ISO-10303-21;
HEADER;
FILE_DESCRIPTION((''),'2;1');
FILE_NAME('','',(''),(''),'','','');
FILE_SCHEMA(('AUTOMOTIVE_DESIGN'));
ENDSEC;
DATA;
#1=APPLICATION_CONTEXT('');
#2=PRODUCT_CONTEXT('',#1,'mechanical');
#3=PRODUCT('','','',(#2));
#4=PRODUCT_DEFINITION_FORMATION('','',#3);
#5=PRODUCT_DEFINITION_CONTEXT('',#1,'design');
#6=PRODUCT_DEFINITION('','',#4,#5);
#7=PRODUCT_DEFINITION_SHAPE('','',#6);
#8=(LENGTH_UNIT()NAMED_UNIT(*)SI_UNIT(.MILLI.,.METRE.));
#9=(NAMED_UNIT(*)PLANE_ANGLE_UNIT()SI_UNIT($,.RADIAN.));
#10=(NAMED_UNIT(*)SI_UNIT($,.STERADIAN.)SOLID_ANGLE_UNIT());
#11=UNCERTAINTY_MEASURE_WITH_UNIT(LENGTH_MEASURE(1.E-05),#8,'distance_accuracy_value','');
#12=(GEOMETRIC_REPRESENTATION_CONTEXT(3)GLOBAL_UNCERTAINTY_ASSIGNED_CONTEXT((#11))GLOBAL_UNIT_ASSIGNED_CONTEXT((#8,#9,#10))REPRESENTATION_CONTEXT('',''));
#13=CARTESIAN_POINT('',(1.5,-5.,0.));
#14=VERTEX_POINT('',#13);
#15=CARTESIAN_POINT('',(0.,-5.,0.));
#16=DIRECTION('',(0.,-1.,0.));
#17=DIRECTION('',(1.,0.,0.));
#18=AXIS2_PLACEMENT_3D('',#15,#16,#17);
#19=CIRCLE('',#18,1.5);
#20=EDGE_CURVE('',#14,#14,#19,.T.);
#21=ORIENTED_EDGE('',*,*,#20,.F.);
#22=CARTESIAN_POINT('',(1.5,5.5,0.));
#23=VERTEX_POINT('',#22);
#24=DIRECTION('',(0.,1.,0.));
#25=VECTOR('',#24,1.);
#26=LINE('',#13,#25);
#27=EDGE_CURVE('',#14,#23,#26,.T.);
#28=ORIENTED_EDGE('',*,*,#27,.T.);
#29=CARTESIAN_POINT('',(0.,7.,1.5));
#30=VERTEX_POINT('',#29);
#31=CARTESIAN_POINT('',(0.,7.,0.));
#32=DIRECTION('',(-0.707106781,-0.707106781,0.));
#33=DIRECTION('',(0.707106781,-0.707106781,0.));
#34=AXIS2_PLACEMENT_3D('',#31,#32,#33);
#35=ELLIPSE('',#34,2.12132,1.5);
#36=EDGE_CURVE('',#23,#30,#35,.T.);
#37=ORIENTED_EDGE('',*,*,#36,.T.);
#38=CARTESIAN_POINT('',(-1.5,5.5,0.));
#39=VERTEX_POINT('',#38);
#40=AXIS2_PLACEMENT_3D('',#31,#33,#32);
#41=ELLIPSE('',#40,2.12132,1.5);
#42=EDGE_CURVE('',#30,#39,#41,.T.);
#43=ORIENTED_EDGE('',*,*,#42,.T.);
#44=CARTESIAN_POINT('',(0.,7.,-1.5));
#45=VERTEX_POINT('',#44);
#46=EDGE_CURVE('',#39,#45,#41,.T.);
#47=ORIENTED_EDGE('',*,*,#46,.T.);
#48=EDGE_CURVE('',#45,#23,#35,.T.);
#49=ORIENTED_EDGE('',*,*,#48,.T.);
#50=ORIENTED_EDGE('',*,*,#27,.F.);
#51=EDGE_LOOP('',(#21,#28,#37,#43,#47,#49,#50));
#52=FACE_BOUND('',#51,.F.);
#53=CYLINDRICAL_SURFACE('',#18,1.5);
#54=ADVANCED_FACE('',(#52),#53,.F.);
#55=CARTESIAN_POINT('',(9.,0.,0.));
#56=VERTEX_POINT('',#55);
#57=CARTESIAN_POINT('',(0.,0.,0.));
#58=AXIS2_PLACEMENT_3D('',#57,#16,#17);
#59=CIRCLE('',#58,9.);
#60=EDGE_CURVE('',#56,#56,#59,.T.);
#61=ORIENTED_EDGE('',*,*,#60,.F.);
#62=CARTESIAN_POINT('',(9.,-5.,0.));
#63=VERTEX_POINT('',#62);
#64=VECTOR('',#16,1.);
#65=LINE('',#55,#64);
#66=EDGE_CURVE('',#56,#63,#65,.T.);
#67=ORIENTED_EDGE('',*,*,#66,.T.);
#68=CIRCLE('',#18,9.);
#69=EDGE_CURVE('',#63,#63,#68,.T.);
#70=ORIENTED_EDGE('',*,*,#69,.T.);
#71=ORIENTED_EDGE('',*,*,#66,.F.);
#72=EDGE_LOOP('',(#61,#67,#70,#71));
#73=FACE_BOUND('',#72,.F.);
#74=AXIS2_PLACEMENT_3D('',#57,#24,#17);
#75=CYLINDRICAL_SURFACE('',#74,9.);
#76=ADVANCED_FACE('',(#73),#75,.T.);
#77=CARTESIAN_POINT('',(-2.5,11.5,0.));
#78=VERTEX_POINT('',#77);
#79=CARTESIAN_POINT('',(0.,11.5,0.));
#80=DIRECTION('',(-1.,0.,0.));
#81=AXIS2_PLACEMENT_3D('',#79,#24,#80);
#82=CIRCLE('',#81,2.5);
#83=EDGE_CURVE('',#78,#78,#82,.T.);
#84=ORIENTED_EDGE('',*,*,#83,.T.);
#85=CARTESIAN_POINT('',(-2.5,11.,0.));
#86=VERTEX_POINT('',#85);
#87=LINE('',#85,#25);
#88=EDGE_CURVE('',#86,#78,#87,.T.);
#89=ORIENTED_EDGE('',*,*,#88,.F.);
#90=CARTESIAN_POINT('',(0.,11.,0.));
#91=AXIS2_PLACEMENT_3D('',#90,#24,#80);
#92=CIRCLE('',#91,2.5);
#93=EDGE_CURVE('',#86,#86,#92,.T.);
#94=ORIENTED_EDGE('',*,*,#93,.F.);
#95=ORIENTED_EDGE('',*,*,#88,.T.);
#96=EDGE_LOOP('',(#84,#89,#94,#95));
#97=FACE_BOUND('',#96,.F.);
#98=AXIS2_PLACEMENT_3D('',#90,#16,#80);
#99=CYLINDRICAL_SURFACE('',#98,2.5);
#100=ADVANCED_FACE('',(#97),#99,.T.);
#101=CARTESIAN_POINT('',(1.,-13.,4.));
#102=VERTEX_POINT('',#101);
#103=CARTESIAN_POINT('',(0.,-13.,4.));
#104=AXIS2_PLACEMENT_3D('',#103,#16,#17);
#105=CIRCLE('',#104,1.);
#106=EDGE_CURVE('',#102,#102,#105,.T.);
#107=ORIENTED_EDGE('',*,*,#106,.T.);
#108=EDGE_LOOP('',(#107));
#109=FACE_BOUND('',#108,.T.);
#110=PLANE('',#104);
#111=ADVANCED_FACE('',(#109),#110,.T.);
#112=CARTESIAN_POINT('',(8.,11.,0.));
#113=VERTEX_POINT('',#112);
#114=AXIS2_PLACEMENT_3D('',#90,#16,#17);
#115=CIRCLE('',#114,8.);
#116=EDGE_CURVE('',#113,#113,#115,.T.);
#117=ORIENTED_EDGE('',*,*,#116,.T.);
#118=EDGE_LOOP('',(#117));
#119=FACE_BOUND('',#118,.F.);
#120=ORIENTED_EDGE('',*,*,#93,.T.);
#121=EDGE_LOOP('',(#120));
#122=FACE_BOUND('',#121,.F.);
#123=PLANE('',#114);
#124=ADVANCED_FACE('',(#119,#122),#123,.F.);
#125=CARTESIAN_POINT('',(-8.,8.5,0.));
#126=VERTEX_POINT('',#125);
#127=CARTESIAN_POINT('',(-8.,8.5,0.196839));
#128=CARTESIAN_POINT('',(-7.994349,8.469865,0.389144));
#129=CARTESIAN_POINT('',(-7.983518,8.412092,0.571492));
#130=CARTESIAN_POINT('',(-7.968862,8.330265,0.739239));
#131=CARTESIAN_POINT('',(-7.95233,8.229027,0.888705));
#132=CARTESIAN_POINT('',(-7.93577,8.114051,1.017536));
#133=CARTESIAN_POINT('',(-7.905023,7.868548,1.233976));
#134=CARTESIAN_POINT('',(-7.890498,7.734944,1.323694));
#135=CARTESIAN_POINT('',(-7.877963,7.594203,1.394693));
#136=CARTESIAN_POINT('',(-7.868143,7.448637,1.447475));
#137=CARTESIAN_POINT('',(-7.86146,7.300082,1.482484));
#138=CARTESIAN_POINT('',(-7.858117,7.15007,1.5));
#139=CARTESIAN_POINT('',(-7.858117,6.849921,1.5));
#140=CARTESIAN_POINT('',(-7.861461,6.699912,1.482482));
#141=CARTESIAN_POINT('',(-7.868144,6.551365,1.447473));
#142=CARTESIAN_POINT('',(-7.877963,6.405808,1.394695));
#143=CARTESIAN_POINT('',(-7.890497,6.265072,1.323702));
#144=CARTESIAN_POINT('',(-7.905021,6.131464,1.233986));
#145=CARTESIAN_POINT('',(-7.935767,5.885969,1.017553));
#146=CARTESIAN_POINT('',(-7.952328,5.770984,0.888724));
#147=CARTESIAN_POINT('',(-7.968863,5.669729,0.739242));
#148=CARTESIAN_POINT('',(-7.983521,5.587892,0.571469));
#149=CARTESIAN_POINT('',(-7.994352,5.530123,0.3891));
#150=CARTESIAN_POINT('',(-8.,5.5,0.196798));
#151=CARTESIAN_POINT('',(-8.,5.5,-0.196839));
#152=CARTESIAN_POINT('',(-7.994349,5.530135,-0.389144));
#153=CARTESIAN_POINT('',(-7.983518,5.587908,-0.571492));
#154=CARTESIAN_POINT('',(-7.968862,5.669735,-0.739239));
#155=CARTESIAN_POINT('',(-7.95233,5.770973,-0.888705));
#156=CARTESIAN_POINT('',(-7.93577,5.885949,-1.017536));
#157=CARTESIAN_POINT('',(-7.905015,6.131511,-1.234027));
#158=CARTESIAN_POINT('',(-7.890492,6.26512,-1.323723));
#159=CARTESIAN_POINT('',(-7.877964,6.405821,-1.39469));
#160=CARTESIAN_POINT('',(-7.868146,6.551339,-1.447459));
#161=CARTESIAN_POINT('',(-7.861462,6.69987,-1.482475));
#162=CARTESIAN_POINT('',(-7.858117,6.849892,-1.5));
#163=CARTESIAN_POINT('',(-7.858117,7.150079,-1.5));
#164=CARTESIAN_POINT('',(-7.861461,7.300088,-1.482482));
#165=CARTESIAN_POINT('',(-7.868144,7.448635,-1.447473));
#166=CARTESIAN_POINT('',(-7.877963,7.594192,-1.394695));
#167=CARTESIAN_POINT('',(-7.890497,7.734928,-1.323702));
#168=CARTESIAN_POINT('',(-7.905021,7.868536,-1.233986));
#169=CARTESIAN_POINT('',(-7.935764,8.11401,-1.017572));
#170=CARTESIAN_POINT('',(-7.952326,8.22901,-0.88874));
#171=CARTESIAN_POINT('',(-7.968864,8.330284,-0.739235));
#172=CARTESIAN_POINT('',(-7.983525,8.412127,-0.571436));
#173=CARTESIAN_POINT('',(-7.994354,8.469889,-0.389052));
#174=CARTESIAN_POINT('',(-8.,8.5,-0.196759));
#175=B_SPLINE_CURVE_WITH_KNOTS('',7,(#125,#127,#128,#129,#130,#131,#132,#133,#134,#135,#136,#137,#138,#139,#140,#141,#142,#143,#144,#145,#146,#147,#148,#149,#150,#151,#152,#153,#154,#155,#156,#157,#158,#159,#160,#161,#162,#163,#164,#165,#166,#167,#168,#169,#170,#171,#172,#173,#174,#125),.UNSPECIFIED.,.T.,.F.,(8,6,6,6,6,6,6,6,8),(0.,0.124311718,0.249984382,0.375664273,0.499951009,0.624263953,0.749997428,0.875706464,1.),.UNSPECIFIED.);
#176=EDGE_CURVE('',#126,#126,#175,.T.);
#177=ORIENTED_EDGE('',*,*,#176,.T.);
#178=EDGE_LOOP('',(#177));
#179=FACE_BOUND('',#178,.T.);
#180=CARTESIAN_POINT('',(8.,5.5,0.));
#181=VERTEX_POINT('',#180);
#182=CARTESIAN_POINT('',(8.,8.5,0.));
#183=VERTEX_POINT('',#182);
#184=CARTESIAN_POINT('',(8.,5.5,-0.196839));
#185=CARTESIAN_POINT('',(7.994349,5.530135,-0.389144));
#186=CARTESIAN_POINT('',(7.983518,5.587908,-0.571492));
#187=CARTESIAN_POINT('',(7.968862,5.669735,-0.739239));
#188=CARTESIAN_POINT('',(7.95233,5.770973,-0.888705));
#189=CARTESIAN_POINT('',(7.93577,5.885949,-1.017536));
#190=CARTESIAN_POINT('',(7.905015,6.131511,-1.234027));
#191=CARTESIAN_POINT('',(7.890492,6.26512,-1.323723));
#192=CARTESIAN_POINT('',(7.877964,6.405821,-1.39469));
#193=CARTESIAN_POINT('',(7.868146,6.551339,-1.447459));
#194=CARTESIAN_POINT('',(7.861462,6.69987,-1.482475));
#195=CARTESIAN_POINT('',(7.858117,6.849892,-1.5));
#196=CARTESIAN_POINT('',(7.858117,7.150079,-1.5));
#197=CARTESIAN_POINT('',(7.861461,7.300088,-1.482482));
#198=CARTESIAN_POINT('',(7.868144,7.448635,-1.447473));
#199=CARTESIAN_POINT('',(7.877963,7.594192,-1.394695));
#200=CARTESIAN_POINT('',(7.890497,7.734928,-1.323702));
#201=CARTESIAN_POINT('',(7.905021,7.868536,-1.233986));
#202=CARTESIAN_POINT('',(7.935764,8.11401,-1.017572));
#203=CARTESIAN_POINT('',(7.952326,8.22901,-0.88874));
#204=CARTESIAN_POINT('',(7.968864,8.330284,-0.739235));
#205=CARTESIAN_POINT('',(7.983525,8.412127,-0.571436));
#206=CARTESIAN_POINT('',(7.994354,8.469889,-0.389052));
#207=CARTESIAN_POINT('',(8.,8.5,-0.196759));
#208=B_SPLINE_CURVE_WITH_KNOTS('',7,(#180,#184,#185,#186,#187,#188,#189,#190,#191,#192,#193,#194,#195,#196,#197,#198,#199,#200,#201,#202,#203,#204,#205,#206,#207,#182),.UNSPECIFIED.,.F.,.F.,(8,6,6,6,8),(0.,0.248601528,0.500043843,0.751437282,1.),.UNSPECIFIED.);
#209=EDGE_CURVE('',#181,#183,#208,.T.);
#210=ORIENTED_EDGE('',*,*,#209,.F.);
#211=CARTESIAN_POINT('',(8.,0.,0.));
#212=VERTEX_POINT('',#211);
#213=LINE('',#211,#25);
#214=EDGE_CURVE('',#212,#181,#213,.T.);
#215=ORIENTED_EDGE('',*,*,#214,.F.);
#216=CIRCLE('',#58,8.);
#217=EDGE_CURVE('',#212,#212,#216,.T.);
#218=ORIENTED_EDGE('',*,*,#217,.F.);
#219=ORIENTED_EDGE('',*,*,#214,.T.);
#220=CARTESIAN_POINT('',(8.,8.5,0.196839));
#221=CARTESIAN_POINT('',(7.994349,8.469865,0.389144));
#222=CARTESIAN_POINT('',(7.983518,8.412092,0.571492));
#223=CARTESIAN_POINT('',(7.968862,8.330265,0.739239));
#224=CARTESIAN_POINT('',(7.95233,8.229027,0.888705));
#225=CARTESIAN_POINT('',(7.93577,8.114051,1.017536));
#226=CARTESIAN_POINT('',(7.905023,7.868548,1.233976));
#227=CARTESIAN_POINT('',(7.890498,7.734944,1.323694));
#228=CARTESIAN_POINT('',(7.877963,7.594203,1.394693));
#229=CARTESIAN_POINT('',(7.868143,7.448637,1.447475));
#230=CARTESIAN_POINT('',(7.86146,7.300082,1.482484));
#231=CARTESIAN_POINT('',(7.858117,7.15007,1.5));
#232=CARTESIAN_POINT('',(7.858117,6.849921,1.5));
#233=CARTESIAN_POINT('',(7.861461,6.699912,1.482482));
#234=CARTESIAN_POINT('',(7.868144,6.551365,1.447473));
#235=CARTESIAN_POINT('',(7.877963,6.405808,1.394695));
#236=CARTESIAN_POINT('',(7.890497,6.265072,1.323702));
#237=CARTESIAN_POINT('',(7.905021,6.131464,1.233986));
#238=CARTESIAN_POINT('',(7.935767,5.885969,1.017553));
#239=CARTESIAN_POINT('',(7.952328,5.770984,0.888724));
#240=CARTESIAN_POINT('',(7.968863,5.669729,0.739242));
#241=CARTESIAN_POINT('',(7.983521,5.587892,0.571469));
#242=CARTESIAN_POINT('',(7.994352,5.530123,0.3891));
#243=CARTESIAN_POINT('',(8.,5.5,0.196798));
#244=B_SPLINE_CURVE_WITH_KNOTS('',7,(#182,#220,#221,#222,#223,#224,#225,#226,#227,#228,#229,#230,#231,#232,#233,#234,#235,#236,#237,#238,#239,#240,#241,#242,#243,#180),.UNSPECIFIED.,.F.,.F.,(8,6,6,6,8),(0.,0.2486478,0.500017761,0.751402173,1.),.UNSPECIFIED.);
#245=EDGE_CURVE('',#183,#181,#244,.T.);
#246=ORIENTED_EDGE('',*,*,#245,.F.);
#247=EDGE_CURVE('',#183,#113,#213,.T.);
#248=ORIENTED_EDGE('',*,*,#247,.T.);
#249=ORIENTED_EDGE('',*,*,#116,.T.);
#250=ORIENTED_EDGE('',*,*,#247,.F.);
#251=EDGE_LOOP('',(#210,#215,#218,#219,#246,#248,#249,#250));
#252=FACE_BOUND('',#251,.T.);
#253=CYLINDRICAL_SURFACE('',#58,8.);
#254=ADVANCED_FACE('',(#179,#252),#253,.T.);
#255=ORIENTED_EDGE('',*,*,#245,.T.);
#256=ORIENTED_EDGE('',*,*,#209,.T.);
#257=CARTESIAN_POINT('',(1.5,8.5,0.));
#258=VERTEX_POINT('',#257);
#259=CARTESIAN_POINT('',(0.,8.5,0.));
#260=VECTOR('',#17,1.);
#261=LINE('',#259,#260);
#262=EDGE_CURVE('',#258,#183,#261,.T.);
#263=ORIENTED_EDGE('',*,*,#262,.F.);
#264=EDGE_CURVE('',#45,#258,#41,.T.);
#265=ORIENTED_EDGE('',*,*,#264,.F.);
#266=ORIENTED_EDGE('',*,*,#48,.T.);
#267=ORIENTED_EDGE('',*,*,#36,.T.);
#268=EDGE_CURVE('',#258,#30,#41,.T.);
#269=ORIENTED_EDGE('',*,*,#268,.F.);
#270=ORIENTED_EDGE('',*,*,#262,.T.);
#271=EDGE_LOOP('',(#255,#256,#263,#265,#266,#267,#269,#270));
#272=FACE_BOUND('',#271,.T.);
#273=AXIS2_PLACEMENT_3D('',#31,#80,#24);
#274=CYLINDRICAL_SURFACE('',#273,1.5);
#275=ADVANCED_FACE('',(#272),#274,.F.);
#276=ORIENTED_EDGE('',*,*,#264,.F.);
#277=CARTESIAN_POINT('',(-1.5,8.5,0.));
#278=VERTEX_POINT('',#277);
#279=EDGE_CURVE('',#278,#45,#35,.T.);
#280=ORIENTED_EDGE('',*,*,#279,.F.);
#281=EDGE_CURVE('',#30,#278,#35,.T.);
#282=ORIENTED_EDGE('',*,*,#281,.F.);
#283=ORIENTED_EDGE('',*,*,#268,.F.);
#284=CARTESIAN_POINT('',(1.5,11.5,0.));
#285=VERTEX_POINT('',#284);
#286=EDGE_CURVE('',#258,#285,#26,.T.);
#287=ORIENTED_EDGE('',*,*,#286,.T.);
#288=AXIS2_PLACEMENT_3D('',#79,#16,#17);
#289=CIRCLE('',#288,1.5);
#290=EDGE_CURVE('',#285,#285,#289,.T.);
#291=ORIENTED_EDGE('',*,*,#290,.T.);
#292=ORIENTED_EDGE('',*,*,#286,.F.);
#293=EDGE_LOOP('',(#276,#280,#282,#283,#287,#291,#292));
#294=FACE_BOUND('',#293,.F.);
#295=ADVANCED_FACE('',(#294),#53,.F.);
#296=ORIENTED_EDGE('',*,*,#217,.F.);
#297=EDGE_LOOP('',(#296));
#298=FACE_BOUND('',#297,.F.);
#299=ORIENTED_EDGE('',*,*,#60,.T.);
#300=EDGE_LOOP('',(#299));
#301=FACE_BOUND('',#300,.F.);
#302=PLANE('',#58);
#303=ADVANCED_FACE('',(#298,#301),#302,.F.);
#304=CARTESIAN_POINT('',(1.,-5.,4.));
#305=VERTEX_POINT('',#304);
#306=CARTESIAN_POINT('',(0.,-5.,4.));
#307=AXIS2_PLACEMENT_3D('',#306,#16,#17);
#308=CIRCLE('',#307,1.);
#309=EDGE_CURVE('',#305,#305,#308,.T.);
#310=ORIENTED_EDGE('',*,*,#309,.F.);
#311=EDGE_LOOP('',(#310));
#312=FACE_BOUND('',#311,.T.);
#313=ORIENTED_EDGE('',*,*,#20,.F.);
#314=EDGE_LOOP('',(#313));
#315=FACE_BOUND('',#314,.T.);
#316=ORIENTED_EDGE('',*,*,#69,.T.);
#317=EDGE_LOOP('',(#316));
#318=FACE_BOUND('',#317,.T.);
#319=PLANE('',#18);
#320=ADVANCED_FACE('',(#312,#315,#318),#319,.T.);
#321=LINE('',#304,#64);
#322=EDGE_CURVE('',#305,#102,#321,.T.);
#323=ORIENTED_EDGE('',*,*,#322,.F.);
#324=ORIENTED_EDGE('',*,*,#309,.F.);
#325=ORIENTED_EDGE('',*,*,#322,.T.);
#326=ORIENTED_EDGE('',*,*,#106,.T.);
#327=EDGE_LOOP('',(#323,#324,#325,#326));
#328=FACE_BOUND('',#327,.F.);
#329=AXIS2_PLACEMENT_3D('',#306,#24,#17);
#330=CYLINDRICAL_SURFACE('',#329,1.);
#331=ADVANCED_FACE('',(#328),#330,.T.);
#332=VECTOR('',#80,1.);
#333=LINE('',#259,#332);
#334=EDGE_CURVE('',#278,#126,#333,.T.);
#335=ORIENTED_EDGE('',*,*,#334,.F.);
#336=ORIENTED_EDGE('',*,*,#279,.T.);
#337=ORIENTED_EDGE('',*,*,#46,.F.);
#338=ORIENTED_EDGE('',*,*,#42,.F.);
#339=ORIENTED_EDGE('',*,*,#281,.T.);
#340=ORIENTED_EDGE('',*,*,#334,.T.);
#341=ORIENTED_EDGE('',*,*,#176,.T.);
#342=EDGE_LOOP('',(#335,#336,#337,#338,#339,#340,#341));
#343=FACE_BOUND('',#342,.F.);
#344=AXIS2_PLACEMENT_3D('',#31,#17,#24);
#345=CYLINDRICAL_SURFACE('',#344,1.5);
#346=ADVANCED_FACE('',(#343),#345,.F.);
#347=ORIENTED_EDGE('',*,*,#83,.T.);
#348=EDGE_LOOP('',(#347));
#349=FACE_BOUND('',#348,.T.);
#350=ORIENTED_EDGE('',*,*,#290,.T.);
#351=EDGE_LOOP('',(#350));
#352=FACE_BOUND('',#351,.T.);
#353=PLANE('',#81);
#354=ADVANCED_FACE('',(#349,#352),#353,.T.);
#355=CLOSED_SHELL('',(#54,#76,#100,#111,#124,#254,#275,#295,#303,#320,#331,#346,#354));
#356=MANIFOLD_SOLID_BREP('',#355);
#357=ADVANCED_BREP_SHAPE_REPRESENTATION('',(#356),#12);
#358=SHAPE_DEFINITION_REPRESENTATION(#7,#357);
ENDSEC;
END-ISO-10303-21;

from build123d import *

# Parameters (mm, degrees)
F0_R          = 9
F0_R_2        = 8
F1_DEPTH      = 5
F2_DEPTH      = 11
F3_R          = 2.5
F4_DEPTH      = 0.5
F5_R          = 1.5
F6_DEPTH      = 25
F5_R_2        = 1
F7_DEPTH      = 8
F8_R          = 1.5
F9_DEPTH      = 9.001
F9_DEPTH_BACK = 9.001


with BuildPart() as f1:
    # F0 (on Front) → F1 (new body)
    with BuildSketch(Plane.XZ):
        Circle(F0_R)
        Circle(F0_R_2, mode=Mode.SUBTRACT)
        Circle(F0_R_2)
    extrude(amount=F1_DEPTH)

    # F0 (on Front) → F2 (join)
    with BuildSketch(Plane.XZ):
        Circle(F0_R_2)
    extrude(amount=-F2_DEPTH)

    # F3 (on face) → F4 (join)
    with BuildSketch(Plane(origin=(0, 11, 0), x_dir=(-1, 0, 0), z_dir=(0, 1, 0))):
        Circle(F3_R)
    extrude(amount=F4_DEPTH)

    # F5 (on face) → F6 (cut)
    with BuildSketch(Plane.XZ.offset(5)):
        Circle(F5_R)
    extrude(amount=-F6_DEPTH, mode=Mode.SUBTRACT)

    # F5 (on face) → F7 (join)
    with BuildSketch(Plane.XZ.offset(5)):
        with Locations((0, 4)):
            Circle(F5_R_2)
    extrude(amount=F7_DEPTH)

    # F8 (on Right) → F9 (cut, two sides)
    with BuildSketch(Plane.YZ) as f9_sk:
        with Locations((7, 0)):
            Circle(F8_R)
    extrude(amount=-F9_DEPTH, mode=Mode.SUBTRACT)
    extrude(f9_sk.sketch, amount=F9_DEPTH_BACK, mode=Mode.SUBTRACT)


solid = f1.part
